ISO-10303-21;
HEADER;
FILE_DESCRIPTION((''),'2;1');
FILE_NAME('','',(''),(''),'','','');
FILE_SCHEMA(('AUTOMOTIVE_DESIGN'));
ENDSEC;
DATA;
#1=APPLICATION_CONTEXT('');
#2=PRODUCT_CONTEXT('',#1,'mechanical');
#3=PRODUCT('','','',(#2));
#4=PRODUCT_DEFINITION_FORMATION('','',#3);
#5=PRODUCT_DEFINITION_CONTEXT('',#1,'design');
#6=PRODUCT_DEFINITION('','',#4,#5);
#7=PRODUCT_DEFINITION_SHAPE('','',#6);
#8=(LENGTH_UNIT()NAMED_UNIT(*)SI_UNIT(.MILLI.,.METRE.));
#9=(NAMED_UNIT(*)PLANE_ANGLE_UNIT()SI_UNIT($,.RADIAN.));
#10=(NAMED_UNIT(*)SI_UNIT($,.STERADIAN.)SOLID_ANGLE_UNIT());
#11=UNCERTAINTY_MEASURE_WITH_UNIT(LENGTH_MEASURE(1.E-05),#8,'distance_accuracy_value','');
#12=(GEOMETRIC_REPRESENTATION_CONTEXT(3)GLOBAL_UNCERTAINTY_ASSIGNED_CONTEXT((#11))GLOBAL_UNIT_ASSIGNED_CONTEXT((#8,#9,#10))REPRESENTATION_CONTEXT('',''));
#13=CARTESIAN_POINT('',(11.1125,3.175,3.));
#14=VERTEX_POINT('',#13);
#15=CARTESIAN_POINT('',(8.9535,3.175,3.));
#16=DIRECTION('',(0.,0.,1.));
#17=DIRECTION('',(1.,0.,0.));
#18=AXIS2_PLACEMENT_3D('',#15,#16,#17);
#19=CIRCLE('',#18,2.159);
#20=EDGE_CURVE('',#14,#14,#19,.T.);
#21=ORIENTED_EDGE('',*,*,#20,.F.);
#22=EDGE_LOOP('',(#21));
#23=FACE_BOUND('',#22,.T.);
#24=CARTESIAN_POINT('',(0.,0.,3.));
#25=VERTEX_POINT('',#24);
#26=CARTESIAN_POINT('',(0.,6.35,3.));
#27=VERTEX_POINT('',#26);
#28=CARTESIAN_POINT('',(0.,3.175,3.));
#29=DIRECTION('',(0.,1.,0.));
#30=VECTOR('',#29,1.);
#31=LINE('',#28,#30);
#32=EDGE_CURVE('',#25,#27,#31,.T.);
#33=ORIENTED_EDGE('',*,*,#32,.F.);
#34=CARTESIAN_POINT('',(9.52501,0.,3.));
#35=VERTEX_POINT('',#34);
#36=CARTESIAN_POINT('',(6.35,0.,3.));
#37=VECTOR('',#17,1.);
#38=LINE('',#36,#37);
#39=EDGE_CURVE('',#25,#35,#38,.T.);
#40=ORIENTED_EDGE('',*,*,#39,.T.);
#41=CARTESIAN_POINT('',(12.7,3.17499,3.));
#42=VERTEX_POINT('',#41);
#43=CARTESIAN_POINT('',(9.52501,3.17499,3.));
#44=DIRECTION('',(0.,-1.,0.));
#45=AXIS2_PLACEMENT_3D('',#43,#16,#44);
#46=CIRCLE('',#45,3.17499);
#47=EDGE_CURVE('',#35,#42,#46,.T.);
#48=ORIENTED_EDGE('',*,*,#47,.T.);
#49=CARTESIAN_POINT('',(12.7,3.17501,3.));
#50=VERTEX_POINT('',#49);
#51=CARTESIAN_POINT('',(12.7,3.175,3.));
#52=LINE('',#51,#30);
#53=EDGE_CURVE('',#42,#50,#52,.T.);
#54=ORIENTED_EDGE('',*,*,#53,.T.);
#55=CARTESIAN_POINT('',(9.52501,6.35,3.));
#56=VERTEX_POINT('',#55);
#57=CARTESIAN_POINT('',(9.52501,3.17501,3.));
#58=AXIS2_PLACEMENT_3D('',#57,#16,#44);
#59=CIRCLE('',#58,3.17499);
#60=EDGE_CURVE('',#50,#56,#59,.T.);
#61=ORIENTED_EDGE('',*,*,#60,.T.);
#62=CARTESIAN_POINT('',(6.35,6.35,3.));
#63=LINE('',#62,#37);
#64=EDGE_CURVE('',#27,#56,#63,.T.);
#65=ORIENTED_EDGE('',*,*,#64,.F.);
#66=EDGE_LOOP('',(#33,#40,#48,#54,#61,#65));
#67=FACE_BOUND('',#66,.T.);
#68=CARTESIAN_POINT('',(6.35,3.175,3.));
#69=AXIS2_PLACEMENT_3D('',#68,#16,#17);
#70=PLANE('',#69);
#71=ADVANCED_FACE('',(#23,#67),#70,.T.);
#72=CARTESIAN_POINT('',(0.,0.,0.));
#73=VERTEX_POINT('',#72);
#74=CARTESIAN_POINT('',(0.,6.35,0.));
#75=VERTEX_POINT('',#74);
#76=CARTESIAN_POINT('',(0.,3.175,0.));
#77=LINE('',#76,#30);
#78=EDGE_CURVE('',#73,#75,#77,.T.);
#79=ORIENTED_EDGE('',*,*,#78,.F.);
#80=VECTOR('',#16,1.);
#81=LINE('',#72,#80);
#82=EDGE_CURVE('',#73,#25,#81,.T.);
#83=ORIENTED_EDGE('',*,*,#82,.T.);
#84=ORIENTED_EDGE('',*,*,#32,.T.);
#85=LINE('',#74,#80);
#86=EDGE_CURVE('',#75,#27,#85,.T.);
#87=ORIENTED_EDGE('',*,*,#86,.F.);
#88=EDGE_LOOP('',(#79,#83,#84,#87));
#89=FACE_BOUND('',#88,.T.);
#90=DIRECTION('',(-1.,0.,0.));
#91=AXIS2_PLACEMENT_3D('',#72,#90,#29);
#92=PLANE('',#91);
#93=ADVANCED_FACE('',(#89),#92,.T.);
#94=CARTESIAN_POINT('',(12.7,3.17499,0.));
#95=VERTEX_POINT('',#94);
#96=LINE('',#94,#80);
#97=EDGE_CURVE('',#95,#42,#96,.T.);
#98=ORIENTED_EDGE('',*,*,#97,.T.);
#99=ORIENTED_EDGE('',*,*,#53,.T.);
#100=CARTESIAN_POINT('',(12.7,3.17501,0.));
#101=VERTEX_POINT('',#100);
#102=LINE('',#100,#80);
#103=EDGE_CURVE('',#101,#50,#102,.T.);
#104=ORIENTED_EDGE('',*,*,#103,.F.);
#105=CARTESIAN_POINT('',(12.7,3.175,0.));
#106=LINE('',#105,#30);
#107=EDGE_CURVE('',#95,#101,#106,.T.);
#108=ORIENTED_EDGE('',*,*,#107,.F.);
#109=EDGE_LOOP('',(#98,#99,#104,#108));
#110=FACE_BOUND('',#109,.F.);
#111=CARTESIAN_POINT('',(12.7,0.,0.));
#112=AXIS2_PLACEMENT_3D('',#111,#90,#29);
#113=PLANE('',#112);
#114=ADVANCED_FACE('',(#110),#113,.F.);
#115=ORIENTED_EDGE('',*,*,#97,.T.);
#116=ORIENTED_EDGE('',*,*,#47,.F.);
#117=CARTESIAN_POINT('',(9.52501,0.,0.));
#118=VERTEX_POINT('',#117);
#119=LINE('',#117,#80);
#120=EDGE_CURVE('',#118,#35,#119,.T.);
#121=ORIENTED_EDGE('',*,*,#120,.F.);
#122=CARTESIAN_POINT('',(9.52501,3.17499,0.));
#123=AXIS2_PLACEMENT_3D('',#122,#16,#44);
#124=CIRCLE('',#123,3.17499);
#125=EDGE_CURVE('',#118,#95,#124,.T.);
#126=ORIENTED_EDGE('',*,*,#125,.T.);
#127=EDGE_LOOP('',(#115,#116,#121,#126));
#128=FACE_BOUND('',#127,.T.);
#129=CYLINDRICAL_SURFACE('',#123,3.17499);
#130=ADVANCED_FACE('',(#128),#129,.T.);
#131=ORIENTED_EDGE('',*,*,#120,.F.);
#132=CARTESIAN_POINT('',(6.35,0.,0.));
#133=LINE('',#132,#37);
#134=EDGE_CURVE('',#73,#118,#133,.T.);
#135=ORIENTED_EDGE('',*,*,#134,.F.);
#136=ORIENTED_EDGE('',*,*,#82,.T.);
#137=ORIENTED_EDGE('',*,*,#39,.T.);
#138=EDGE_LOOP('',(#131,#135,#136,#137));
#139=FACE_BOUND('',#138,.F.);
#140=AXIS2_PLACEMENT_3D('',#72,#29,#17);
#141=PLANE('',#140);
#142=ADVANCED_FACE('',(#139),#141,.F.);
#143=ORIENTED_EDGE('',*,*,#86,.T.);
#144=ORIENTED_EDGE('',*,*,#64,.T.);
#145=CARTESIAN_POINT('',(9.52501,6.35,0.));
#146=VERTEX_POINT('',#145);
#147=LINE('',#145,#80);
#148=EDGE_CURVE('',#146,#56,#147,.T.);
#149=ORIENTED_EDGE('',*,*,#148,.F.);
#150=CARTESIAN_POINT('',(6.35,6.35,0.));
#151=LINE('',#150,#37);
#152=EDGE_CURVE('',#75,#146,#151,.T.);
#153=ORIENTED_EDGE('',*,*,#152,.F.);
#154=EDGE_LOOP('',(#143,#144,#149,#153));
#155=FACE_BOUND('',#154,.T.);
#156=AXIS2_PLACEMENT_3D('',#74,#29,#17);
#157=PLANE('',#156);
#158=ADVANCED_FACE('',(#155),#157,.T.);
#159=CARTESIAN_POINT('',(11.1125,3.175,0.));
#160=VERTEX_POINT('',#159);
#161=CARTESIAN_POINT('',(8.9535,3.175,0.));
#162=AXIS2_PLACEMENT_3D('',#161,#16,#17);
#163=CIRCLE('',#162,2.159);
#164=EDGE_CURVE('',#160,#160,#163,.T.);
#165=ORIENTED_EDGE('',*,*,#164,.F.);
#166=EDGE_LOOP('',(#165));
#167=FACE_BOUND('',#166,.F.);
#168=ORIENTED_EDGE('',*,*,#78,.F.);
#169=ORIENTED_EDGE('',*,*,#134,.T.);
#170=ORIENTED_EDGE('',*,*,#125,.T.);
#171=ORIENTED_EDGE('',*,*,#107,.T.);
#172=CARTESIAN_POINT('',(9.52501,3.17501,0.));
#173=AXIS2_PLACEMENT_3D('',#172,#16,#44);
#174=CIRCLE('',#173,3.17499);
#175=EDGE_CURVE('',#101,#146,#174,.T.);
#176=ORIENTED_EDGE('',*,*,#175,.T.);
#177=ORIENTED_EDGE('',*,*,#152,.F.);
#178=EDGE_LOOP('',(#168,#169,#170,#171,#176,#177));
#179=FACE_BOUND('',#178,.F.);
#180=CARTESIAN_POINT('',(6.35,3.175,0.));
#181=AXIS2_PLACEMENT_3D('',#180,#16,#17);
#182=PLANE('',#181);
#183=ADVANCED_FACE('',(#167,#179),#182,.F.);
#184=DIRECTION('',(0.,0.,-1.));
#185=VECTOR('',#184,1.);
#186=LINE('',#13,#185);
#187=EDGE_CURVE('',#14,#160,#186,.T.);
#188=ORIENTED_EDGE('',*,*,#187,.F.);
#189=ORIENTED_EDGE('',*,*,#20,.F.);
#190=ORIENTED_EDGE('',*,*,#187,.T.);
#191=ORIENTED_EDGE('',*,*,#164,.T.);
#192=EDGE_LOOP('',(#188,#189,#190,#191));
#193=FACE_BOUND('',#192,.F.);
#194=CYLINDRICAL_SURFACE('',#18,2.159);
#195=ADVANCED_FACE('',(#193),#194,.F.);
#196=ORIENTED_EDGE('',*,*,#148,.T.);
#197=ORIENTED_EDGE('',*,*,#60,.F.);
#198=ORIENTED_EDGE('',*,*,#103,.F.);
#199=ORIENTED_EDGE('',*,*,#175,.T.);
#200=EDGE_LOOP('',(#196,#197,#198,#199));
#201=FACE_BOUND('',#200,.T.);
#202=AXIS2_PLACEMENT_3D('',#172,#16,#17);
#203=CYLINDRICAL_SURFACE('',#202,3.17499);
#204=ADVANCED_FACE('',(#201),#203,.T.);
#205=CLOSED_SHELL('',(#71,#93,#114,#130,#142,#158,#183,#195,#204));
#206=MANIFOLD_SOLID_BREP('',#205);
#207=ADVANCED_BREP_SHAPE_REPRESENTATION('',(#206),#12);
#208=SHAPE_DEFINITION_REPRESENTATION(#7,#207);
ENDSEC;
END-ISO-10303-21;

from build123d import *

# Parameters (mm, degrees)
F0_W     = 12.7
F0_H     = 6.35
F1_DEPTH = 3
F3_R     = 3.17499
F2_R     = 2.159
F4_DEPTH = 25.4


# Not quite as in the source:
# - a fillet or chamfer is up to 0.001 mm smaller than in the source, because OpenCascade refuses the exact size


with BuildPart() as f1:
    # F0 (on Top) → F1 (new body)
    with BuildSketch(Plane.XY):
        with Locations((6.35, 3.175)):
            Rectangle(F0_W, F0_H)
    extrude(amount=F1_DEPTH)

    # F3 (radius 3.175 in the source; OpenCascade refuses exactly that, so slightly less here)
    f3_edges = [f1.edges().sort_by_distance(p)[0] for p in [
        (12.7, 6.35, 1.5),
        (12.7, 0, 1.5),
    ]]
    fillet(f3_edges, radius=F3_R)

    # F2 (on face) → F4 (cut)
    with BuildSketch(Plane.XY.offset(3)):
        with Locations((8.9535, 3.175)):
            Circle(F2_R)
    extrude(amount=-F4_DEPTH, mode=Mode.SUBTRACT)


solid = f1.part
